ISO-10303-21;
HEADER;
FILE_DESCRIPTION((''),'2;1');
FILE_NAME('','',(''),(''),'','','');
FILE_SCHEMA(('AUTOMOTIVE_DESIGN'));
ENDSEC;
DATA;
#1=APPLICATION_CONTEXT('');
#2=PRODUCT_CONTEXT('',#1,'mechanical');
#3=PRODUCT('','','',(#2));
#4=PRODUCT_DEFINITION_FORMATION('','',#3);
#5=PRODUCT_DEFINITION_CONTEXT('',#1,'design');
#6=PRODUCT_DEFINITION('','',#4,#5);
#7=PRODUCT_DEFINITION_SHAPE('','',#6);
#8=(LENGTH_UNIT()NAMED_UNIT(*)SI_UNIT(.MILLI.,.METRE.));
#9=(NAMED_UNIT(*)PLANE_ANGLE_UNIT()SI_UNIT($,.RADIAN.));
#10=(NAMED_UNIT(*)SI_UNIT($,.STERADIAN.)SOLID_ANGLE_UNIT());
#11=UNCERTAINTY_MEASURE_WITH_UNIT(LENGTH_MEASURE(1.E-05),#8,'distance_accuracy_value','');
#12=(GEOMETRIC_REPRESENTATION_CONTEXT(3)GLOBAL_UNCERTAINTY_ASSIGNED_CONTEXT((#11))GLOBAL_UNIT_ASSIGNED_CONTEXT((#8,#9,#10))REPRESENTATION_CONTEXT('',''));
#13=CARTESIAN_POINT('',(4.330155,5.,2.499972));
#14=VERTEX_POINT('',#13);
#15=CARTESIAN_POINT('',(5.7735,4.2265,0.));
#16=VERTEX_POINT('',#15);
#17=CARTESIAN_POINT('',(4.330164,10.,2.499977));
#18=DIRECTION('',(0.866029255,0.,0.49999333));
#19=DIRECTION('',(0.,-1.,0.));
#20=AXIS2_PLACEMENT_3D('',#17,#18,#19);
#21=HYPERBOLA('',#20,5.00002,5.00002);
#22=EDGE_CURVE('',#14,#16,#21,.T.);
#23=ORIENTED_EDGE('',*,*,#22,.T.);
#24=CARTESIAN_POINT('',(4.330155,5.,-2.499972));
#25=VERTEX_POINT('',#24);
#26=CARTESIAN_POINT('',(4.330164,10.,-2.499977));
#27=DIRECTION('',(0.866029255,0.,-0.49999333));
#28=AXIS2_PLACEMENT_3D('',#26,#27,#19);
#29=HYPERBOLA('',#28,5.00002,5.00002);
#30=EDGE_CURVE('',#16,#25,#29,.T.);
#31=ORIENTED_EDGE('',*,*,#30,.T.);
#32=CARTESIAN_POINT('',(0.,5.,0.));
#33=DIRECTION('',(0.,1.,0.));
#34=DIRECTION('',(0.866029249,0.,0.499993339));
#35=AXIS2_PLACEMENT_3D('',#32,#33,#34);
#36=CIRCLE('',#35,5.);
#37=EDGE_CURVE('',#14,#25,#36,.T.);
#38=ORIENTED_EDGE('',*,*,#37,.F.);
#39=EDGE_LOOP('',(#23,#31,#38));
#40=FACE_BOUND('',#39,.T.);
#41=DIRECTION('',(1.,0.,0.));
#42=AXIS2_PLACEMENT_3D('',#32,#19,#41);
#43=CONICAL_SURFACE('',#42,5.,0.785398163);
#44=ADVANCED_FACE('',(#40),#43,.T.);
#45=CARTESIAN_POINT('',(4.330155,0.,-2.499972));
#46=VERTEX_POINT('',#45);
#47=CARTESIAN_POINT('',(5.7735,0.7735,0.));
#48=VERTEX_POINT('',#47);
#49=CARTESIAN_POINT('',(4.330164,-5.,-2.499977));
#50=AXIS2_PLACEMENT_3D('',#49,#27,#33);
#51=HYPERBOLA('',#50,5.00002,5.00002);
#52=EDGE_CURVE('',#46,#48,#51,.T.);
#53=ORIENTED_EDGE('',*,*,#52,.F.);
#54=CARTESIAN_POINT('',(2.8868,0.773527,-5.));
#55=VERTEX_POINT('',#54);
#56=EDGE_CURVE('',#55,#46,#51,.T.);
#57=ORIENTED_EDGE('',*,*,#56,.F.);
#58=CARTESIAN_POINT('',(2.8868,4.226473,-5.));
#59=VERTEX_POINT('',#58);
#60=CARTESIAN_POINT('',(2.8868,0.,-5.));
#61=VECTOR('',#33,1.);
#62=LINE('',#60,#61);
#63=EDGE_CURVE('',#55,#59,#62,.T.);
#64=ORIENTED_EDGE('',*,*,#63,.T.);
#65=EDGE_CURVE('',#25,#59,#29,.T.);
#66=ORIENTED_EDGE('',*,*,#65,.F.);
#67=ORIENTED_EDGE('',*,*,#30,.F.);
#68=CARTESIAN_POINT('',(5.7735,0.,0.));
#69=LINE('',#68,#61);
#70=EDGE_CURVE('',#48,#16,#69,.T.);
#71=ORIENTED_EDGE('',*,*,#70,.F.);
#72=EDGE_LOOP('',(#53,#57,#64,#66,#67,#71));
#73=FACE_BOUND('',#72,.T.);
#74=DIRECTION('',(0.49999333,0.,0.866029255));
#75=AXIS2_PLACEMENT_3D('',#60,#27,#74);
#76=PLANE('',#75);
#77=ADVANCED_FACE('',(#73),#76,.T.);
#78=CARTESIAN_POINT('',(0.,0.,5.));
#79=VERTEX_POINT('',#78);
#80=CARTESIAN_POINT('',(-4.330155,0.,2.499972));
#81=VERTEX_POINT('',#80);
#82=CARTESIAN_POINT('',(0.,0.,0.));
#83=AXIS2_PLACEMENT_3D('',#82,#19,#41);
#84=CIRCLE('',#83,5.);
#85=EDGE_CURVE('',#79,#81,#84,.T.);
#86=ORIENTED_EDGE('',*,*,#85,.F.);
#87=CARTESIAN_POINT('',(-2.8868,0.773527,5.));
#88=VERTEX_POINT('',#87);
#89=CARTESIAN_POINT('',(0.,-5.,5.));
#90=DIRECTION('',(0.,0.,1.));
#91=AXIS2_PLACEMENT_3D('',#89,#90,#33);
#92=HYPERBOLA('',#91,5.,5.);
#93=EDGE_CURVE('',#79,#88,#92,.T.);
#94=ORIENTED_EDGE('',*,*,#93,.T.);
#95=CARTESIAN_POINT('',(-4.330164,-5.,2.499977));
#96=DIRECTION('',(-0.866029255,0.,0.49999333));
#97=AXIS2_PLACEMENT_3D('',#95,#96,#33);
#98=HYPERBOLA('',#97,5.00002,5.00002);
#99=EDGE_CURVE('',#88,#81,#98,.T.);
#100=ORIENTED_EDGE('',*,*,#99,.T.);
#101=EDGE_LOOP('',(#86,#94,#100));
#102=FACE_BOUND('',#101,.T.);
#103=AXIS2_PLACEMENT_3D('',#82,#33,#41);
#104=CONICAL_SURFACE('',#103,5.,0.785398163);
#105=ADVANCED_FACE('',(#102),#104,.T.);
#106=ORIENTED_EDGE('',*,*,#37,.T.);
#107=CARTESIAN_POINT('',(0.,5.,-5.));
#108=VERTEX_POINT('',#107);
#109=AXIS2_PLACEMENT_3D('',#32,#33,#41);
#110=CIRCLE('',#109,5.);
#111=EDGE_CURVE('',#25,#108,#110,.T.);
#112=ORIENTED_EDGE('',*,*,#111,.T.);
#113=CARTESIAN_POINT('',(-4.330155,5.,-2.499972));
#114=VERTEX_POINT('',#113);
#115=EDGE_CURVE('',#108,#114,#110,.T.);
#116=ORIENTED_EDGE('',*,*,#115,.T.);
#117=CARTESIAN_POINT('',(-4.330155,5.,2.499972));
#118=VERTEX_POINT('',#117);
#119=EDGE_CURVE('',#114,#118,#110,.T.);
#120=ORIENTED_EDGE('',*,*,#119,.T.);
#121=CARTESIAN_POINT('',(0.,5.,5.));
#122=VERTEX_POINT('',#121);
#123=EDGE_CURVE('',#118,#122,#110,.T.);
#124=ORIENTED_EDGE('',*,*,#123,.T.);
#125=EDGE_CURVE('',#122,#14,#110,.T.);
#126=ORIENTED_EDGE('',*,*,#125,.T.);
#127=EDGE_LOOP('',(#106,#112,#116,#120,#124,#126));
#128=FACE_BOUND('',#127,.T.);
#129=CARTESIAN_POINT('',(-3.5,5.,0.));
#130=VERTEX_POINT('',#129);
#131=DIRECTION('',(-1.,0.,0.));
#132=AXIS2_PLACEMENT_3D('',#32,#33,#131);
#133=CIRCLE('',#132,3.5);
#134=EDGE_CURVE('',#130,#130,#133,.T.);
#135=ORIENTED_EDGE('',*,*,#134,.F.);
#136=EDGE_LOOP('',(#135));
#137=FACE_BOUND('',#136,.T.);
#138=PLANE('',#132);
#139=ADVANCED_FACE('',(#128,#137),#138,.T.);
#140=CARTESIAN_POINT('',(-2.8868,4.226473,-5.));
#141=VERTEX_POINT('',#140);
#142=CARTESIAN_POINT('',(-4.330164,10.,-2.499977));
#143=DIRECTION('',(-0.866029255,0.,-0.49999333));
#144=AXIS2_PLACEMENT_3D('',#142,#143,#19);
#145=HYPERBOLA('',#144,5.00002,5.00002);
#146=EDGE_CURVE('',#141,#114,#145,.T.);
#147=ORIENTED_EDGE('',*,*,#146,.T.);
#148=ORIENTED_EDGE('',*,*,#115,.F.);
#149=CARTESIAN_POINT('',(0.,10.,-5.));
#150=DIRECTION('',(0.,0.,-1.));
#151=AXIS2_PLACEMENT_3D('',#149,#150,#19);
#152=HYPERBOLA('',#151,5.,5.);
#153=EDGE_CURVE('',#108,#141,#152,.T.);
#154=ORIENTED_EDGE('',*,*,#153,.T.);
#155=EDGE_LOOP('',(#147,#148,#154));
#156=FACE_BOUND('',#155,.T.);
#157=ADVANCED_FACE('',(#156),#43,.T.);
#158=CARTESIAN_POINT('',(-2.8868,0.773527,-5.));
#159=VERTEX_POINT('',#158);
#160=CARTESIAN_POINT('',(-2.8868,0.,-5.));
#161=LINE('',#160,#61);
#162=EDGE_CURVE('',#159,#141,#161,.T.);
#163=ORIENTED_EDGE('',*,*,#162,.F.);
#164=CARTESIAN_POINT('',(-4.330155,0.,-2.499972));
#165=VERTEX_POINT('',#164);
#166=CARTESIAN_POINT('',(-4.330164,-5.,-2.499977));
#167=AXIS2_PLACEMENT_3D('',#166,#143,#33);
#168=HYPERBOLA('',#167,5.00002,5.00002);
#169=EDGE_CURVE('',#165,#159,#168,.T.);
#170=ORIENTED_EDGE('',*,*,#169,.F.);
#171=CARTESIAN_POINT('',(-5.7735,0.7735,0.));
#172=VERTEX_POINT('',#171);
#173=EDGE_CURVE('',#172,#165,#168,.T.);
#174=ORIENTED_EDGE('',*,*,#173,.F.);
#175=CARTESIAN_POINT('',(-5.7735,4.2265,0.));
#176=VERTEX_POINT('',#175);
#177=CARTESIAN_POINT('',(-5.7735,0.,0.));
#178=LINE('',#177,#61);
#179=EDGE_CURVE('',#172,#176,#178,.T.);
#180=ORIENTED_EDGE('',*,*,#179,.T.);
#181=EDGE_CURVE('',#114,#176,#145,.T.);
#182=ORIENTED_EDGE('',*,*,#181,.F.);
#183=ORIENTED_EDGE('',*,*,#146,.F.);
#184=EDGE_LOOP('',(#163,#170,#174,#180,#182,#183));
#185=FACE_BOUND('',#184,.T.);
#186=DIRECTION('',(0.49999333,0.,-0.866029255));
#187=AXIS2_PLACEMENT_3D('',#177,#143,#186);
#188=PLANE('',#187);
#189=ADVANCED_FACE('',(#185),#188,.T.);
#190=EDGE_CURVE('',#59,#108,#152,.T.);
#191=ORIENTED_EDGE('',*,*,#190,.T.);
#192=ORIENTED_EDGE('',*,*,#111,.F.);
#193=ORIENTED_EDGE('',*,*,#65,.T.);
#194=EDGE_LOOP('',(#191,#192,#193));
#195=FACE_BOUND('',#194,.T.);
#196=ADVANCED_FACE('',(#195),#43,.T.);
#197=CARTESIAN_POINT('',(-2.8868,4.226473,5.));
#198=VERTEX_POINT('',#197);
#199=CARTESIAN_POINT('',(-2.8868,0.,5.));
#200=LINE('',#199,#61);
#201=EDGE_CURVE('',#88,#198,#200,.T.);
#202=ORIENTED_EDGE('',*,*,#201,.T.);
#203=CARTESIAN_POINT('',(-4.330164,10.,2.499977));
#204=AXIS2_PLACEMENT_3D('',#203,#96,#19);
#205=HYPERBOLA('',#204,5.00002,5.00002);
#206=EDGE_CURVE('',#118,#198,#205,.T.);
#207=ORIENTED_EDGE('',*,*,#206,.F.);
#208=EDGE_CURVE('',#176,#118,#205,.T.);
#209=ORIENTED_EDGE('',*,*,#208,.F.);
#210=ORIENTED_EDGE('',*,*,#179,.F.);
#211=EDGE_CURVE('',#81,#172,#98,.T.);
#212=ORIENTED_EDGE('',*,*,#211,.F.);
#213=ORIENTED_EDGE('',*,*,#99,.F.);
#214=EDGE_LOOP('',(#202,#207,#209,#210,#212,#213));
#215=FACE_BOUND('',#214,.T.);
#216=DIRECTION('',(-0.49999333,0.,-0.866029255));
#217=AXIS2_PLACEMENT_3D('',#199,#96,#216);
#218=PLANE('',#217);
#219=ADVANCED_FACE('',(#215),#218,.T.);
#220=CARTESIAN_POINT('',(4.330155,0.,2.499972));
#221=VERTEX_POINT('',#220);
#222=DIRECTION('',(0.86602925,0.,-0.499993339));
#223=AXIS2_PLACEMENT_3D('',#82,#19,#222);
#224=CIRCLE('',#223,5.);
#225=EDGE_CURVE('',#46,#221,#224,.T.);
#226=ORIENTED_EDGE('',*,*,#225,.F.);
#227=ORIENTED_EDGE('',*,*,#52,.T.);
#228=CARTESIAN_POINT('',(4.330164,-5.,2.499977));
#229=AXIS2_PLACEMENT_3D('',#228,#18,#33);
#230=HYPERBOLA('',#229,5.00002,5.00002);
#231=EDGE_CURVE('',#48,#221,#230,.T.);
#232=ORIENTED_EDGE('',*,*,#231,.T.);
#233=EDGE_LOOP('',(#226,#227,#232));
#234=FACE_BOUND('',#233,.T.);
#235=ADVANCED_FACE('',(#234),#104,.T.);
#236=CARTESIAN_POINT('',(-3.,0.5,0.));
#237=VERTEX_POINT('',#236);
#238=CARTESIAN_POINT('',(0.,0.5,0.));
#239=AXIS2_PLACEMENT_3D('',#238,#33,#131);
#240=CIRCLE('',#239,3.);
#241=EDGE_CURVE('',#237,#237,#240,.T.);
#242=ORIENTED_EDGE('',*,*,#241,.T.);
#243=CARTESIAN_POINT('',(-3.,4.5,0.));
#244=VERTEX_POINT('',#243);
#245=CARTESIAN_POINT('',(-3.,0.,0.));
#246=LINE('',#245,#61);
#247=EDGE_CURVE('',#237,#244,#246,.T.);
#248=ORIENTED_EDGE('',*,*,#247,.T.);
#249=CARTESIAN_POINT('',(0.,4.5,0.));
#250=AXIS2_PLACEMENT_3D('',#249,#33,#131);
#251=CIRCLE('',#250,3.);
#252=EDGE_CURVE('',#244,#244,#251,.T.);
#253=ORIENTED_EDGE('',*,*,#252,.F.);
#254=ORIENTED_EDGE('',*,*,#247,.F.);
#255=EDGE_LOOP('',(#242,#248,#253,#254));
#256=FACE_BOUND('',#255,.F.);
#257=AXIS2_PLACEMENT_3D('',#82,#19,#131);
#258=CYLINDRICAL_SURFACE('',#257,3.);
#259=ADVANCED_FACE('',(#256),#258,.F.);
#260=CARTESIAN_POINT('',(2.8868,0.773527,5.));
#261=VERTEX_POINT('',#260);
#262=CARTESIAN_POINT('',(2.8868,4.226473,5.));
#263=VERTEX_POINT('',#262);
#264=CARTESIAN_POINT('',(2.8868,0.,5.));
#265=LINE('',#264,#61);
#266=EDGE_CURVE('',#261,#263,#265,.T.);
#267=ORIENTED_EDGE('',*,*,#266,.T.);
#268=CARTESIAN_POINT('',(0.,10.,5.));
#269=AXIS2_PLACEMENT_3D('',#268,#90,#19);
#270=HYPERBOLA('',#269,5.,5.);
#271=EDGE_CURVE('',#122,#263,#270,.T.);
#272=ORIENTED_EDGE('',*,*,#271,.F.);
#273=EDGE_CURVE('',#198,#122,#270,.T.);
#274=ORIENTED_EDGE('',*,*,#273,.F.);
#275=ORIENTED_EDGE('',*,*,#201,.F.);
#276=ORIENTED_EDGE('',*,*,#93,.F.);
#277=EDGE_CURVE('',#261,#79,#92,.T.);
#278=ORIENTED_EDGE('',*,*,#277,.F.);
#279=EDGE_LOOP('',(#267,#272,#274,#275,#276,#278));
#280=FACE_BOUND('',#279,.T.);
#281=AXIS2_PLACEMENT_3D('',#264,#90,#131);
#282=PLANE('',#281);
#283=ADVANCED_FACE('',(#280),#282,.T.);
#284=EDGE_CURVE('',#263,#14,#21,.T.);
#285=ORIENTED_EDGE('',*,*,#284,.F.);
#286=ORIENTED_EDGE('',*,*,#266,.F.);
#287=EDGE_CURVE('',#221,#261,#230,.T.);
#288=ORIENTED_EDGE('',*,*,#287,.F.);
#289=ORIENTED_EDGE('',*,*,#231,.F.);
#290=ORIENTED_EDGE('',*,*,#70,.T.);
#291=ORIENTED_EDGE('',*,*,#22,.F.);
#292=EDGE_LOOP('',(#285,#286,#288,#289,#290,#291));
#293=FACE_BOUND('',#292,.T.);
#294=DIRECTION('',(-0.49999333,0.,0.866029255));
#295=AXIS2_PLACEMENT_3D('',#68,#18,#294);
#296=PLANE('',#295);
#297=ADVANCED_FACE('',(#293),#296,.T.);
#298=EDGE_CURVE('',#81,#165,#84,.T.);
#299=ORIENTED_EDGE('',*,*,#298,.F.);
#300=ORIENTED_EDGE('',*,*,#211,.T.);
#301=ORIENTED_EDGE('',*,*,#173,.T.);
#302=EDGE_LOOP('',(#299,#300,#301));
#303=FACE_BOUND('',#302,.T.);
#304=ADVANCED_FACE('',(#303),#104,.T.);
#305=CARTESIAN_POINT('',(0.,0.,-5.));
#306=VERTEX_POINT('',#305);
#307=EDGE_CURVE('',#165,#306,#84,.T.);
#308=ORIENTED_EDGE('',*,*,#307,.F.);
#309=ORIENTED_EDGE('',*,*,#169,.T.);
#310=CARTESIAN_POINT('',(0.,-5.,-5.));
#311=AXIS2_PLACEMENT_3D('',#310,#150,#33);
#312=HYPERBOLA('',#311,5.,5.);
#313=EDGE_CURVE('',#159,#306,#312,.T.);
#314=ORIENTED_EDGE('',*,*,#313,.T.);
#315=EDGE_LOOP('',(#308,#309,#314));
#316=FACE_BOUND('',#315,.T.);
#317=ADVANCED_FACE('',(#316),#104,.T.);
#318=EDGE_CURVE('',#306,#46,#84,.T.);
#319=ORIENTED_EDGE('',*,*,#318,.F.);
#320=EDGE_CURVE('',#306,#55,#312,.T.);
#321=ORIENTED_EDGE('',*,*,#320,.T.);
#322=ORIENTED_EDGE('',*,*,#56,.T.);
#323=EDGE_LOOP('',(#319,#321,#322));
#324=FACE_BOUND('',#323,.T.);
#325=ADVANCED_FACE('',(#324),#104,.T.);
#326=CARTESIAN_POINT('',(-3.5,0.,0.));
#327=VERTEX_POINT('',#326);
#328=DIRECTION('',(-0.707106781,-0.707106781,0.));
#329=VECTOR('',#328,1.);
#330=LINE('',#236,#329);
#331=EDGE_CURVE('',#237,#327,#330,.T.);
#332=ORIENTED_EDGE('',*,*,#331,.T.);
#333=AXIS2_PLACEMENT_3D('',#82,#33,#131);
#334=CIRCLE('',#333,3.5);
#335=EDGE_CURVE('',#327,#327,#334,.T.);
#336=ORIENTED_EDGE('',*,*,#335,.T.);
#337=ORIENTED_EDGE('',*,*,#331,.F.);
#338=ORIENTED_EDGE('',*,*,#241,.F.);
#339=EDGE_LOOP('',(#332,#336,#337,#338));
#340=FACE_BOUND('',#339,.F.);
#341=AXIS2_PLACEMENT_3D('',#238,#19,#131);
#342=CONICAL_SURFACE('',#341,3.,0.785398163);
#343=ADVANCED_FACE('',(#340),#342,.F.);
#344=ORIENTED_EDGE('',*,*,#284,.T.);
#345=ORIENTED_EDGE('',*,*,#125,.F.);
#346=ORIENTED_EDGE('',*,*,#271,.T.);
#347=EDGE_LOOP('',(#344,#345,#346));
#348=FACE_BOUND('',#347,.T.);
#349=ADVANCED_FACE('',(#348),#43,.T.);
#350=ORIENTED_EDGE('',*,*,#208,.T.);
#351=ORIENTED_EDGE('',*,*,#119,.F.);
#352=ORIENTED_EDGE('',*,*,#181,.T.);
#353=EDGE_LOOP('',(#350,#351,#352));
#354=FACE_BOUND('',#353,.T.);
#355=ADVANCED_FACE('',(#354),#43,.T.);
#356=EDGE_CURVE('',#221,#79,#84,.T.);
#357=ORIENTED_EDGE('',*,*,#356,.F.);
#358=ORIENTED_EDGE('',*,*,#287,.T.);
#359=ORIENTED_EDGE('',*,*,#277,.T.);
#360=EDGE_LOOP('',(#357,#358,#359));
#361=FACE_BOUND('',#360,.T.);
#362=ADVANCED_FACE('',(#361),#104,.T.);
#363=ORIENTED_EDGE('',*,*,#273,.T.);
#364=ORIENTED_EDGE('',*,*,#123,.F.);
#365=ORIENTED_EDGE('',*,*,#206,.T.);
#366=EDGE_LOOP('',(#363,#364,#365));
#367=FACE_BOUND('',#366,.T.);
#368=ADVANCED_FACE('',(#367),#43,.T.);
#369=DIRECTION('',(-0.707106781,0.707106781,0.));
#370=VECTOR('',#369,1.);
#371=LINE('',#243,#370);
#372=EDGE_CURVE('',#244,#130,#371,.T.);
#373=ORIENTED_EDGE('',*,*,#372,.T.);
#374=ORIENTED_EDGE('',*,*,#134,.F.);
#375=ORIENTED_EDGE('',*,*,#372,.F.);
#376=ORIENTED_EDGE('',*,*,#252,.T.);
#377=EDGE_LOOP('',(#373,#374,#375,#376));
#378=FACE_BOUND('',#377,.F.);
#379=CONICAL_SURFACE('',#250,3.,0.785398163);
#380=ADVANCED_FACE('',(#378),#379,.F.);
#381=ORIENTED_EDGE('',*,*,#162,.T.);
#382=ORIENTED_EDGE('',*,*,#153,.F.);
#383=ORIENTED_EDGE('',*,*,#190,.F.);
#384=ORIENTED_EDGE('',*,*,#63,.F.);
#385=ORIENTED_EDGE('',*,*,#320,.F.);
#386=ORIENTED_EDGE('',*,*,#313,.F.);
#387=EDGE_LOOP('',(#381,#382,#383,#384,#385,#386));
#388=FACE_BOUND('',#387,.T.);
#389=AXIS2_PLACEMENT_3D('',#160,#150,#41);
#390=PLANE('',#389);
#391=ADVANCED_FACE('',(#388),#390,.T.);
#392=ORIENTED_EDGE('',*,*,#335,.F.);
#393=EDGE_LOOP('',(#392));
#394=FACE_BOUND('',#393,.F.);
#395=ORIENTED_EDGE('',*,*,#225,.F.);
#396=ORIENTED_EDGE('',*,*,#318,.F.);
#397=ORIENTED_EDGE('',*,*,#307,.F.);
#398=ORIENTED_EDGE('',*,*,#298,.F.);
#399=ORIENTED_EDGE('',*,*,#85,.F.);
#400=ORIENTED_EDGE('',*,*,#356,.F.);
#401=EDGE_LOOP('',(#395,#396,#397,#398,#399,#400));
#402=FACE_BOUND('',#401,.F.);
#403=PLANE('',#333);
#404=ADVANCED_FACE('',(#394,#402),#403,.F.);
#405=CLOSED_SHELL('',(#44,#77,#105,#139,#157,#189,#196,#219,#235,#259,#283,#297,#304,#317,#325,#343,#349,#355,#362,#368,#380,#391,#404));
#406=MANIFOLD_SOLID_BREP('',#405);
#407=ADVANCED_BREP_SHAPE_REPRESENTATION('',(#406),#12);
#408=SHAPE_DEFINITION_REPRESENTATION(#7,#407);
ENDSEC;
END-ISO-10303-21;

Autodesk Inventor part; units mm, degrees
ref_plane "YZ Plane" through (0, 0, 0) normal (1, 0, 0) x (0, 1, 0)
ref_plane "XZ Plane" through (0, 0, 0) normal (0, 1, 0) x (-1, 0, 0)
ref_plane "XY Plane" through (0, 0, 0) normal (0, 0, 1) x (1, 0, 0)
sketch "Esboço1" plane through (0, 0, 0) normal (0, 1, 0) x (-1, 0, 0)
  circle A0 centre (0, 0) radius 3
  line L0 (-2.8868, -5) -> (-5.7735, 0)
  line L1 (-5.7735, 0) -> (-2.8868, 5)
  line L2 (-2.8868, 5) -> (2.8868, 5)
  line L3 (2.8868, 5) -> (5.7735, 0)
  line L4 (5.7735, 0) -> (2.8868, -5)
  line L5 (2.8868, -5) -> (-2.8868, -5)
  dimension "d0" = 6
extrude "Extrusão1" add sketch "Esboço1" along normal blind 5
thread "Rosca1" size "1/4-20 UNC" class "2B" standard "ANSI Unified Screw Threads" full length
sketch "Esboço2" plane through (0, 0, 0) normal (1, 0, 0) x (0, 1, 0)
  point P0 (0, 0)
chamfer "Chanfro1" distance 0.5 angle 45 2 edges at (3, 0, 0) (3, 5, 0)
sketch "Esboço5" plane through (0, 0, 0) normal (0, -1, 0) x (1, 0, 0)
  circle A0 centre (0, 0) radius 5
extrude "Extrusão2" cut sketch "Esboço5" against normal through all draft 45 keep common part
sketch "Esboço6" plane through (0, 5, 0) normal (0, 1, 0) x (1, 0, 0)
  circle A0 centre (0, 0) radius 5
extrude "Extrusão3" cut sketch "Esboço6" against normal through all draft 45 keep common part
properties part number "porca m6" material "Aço inoxidável"
